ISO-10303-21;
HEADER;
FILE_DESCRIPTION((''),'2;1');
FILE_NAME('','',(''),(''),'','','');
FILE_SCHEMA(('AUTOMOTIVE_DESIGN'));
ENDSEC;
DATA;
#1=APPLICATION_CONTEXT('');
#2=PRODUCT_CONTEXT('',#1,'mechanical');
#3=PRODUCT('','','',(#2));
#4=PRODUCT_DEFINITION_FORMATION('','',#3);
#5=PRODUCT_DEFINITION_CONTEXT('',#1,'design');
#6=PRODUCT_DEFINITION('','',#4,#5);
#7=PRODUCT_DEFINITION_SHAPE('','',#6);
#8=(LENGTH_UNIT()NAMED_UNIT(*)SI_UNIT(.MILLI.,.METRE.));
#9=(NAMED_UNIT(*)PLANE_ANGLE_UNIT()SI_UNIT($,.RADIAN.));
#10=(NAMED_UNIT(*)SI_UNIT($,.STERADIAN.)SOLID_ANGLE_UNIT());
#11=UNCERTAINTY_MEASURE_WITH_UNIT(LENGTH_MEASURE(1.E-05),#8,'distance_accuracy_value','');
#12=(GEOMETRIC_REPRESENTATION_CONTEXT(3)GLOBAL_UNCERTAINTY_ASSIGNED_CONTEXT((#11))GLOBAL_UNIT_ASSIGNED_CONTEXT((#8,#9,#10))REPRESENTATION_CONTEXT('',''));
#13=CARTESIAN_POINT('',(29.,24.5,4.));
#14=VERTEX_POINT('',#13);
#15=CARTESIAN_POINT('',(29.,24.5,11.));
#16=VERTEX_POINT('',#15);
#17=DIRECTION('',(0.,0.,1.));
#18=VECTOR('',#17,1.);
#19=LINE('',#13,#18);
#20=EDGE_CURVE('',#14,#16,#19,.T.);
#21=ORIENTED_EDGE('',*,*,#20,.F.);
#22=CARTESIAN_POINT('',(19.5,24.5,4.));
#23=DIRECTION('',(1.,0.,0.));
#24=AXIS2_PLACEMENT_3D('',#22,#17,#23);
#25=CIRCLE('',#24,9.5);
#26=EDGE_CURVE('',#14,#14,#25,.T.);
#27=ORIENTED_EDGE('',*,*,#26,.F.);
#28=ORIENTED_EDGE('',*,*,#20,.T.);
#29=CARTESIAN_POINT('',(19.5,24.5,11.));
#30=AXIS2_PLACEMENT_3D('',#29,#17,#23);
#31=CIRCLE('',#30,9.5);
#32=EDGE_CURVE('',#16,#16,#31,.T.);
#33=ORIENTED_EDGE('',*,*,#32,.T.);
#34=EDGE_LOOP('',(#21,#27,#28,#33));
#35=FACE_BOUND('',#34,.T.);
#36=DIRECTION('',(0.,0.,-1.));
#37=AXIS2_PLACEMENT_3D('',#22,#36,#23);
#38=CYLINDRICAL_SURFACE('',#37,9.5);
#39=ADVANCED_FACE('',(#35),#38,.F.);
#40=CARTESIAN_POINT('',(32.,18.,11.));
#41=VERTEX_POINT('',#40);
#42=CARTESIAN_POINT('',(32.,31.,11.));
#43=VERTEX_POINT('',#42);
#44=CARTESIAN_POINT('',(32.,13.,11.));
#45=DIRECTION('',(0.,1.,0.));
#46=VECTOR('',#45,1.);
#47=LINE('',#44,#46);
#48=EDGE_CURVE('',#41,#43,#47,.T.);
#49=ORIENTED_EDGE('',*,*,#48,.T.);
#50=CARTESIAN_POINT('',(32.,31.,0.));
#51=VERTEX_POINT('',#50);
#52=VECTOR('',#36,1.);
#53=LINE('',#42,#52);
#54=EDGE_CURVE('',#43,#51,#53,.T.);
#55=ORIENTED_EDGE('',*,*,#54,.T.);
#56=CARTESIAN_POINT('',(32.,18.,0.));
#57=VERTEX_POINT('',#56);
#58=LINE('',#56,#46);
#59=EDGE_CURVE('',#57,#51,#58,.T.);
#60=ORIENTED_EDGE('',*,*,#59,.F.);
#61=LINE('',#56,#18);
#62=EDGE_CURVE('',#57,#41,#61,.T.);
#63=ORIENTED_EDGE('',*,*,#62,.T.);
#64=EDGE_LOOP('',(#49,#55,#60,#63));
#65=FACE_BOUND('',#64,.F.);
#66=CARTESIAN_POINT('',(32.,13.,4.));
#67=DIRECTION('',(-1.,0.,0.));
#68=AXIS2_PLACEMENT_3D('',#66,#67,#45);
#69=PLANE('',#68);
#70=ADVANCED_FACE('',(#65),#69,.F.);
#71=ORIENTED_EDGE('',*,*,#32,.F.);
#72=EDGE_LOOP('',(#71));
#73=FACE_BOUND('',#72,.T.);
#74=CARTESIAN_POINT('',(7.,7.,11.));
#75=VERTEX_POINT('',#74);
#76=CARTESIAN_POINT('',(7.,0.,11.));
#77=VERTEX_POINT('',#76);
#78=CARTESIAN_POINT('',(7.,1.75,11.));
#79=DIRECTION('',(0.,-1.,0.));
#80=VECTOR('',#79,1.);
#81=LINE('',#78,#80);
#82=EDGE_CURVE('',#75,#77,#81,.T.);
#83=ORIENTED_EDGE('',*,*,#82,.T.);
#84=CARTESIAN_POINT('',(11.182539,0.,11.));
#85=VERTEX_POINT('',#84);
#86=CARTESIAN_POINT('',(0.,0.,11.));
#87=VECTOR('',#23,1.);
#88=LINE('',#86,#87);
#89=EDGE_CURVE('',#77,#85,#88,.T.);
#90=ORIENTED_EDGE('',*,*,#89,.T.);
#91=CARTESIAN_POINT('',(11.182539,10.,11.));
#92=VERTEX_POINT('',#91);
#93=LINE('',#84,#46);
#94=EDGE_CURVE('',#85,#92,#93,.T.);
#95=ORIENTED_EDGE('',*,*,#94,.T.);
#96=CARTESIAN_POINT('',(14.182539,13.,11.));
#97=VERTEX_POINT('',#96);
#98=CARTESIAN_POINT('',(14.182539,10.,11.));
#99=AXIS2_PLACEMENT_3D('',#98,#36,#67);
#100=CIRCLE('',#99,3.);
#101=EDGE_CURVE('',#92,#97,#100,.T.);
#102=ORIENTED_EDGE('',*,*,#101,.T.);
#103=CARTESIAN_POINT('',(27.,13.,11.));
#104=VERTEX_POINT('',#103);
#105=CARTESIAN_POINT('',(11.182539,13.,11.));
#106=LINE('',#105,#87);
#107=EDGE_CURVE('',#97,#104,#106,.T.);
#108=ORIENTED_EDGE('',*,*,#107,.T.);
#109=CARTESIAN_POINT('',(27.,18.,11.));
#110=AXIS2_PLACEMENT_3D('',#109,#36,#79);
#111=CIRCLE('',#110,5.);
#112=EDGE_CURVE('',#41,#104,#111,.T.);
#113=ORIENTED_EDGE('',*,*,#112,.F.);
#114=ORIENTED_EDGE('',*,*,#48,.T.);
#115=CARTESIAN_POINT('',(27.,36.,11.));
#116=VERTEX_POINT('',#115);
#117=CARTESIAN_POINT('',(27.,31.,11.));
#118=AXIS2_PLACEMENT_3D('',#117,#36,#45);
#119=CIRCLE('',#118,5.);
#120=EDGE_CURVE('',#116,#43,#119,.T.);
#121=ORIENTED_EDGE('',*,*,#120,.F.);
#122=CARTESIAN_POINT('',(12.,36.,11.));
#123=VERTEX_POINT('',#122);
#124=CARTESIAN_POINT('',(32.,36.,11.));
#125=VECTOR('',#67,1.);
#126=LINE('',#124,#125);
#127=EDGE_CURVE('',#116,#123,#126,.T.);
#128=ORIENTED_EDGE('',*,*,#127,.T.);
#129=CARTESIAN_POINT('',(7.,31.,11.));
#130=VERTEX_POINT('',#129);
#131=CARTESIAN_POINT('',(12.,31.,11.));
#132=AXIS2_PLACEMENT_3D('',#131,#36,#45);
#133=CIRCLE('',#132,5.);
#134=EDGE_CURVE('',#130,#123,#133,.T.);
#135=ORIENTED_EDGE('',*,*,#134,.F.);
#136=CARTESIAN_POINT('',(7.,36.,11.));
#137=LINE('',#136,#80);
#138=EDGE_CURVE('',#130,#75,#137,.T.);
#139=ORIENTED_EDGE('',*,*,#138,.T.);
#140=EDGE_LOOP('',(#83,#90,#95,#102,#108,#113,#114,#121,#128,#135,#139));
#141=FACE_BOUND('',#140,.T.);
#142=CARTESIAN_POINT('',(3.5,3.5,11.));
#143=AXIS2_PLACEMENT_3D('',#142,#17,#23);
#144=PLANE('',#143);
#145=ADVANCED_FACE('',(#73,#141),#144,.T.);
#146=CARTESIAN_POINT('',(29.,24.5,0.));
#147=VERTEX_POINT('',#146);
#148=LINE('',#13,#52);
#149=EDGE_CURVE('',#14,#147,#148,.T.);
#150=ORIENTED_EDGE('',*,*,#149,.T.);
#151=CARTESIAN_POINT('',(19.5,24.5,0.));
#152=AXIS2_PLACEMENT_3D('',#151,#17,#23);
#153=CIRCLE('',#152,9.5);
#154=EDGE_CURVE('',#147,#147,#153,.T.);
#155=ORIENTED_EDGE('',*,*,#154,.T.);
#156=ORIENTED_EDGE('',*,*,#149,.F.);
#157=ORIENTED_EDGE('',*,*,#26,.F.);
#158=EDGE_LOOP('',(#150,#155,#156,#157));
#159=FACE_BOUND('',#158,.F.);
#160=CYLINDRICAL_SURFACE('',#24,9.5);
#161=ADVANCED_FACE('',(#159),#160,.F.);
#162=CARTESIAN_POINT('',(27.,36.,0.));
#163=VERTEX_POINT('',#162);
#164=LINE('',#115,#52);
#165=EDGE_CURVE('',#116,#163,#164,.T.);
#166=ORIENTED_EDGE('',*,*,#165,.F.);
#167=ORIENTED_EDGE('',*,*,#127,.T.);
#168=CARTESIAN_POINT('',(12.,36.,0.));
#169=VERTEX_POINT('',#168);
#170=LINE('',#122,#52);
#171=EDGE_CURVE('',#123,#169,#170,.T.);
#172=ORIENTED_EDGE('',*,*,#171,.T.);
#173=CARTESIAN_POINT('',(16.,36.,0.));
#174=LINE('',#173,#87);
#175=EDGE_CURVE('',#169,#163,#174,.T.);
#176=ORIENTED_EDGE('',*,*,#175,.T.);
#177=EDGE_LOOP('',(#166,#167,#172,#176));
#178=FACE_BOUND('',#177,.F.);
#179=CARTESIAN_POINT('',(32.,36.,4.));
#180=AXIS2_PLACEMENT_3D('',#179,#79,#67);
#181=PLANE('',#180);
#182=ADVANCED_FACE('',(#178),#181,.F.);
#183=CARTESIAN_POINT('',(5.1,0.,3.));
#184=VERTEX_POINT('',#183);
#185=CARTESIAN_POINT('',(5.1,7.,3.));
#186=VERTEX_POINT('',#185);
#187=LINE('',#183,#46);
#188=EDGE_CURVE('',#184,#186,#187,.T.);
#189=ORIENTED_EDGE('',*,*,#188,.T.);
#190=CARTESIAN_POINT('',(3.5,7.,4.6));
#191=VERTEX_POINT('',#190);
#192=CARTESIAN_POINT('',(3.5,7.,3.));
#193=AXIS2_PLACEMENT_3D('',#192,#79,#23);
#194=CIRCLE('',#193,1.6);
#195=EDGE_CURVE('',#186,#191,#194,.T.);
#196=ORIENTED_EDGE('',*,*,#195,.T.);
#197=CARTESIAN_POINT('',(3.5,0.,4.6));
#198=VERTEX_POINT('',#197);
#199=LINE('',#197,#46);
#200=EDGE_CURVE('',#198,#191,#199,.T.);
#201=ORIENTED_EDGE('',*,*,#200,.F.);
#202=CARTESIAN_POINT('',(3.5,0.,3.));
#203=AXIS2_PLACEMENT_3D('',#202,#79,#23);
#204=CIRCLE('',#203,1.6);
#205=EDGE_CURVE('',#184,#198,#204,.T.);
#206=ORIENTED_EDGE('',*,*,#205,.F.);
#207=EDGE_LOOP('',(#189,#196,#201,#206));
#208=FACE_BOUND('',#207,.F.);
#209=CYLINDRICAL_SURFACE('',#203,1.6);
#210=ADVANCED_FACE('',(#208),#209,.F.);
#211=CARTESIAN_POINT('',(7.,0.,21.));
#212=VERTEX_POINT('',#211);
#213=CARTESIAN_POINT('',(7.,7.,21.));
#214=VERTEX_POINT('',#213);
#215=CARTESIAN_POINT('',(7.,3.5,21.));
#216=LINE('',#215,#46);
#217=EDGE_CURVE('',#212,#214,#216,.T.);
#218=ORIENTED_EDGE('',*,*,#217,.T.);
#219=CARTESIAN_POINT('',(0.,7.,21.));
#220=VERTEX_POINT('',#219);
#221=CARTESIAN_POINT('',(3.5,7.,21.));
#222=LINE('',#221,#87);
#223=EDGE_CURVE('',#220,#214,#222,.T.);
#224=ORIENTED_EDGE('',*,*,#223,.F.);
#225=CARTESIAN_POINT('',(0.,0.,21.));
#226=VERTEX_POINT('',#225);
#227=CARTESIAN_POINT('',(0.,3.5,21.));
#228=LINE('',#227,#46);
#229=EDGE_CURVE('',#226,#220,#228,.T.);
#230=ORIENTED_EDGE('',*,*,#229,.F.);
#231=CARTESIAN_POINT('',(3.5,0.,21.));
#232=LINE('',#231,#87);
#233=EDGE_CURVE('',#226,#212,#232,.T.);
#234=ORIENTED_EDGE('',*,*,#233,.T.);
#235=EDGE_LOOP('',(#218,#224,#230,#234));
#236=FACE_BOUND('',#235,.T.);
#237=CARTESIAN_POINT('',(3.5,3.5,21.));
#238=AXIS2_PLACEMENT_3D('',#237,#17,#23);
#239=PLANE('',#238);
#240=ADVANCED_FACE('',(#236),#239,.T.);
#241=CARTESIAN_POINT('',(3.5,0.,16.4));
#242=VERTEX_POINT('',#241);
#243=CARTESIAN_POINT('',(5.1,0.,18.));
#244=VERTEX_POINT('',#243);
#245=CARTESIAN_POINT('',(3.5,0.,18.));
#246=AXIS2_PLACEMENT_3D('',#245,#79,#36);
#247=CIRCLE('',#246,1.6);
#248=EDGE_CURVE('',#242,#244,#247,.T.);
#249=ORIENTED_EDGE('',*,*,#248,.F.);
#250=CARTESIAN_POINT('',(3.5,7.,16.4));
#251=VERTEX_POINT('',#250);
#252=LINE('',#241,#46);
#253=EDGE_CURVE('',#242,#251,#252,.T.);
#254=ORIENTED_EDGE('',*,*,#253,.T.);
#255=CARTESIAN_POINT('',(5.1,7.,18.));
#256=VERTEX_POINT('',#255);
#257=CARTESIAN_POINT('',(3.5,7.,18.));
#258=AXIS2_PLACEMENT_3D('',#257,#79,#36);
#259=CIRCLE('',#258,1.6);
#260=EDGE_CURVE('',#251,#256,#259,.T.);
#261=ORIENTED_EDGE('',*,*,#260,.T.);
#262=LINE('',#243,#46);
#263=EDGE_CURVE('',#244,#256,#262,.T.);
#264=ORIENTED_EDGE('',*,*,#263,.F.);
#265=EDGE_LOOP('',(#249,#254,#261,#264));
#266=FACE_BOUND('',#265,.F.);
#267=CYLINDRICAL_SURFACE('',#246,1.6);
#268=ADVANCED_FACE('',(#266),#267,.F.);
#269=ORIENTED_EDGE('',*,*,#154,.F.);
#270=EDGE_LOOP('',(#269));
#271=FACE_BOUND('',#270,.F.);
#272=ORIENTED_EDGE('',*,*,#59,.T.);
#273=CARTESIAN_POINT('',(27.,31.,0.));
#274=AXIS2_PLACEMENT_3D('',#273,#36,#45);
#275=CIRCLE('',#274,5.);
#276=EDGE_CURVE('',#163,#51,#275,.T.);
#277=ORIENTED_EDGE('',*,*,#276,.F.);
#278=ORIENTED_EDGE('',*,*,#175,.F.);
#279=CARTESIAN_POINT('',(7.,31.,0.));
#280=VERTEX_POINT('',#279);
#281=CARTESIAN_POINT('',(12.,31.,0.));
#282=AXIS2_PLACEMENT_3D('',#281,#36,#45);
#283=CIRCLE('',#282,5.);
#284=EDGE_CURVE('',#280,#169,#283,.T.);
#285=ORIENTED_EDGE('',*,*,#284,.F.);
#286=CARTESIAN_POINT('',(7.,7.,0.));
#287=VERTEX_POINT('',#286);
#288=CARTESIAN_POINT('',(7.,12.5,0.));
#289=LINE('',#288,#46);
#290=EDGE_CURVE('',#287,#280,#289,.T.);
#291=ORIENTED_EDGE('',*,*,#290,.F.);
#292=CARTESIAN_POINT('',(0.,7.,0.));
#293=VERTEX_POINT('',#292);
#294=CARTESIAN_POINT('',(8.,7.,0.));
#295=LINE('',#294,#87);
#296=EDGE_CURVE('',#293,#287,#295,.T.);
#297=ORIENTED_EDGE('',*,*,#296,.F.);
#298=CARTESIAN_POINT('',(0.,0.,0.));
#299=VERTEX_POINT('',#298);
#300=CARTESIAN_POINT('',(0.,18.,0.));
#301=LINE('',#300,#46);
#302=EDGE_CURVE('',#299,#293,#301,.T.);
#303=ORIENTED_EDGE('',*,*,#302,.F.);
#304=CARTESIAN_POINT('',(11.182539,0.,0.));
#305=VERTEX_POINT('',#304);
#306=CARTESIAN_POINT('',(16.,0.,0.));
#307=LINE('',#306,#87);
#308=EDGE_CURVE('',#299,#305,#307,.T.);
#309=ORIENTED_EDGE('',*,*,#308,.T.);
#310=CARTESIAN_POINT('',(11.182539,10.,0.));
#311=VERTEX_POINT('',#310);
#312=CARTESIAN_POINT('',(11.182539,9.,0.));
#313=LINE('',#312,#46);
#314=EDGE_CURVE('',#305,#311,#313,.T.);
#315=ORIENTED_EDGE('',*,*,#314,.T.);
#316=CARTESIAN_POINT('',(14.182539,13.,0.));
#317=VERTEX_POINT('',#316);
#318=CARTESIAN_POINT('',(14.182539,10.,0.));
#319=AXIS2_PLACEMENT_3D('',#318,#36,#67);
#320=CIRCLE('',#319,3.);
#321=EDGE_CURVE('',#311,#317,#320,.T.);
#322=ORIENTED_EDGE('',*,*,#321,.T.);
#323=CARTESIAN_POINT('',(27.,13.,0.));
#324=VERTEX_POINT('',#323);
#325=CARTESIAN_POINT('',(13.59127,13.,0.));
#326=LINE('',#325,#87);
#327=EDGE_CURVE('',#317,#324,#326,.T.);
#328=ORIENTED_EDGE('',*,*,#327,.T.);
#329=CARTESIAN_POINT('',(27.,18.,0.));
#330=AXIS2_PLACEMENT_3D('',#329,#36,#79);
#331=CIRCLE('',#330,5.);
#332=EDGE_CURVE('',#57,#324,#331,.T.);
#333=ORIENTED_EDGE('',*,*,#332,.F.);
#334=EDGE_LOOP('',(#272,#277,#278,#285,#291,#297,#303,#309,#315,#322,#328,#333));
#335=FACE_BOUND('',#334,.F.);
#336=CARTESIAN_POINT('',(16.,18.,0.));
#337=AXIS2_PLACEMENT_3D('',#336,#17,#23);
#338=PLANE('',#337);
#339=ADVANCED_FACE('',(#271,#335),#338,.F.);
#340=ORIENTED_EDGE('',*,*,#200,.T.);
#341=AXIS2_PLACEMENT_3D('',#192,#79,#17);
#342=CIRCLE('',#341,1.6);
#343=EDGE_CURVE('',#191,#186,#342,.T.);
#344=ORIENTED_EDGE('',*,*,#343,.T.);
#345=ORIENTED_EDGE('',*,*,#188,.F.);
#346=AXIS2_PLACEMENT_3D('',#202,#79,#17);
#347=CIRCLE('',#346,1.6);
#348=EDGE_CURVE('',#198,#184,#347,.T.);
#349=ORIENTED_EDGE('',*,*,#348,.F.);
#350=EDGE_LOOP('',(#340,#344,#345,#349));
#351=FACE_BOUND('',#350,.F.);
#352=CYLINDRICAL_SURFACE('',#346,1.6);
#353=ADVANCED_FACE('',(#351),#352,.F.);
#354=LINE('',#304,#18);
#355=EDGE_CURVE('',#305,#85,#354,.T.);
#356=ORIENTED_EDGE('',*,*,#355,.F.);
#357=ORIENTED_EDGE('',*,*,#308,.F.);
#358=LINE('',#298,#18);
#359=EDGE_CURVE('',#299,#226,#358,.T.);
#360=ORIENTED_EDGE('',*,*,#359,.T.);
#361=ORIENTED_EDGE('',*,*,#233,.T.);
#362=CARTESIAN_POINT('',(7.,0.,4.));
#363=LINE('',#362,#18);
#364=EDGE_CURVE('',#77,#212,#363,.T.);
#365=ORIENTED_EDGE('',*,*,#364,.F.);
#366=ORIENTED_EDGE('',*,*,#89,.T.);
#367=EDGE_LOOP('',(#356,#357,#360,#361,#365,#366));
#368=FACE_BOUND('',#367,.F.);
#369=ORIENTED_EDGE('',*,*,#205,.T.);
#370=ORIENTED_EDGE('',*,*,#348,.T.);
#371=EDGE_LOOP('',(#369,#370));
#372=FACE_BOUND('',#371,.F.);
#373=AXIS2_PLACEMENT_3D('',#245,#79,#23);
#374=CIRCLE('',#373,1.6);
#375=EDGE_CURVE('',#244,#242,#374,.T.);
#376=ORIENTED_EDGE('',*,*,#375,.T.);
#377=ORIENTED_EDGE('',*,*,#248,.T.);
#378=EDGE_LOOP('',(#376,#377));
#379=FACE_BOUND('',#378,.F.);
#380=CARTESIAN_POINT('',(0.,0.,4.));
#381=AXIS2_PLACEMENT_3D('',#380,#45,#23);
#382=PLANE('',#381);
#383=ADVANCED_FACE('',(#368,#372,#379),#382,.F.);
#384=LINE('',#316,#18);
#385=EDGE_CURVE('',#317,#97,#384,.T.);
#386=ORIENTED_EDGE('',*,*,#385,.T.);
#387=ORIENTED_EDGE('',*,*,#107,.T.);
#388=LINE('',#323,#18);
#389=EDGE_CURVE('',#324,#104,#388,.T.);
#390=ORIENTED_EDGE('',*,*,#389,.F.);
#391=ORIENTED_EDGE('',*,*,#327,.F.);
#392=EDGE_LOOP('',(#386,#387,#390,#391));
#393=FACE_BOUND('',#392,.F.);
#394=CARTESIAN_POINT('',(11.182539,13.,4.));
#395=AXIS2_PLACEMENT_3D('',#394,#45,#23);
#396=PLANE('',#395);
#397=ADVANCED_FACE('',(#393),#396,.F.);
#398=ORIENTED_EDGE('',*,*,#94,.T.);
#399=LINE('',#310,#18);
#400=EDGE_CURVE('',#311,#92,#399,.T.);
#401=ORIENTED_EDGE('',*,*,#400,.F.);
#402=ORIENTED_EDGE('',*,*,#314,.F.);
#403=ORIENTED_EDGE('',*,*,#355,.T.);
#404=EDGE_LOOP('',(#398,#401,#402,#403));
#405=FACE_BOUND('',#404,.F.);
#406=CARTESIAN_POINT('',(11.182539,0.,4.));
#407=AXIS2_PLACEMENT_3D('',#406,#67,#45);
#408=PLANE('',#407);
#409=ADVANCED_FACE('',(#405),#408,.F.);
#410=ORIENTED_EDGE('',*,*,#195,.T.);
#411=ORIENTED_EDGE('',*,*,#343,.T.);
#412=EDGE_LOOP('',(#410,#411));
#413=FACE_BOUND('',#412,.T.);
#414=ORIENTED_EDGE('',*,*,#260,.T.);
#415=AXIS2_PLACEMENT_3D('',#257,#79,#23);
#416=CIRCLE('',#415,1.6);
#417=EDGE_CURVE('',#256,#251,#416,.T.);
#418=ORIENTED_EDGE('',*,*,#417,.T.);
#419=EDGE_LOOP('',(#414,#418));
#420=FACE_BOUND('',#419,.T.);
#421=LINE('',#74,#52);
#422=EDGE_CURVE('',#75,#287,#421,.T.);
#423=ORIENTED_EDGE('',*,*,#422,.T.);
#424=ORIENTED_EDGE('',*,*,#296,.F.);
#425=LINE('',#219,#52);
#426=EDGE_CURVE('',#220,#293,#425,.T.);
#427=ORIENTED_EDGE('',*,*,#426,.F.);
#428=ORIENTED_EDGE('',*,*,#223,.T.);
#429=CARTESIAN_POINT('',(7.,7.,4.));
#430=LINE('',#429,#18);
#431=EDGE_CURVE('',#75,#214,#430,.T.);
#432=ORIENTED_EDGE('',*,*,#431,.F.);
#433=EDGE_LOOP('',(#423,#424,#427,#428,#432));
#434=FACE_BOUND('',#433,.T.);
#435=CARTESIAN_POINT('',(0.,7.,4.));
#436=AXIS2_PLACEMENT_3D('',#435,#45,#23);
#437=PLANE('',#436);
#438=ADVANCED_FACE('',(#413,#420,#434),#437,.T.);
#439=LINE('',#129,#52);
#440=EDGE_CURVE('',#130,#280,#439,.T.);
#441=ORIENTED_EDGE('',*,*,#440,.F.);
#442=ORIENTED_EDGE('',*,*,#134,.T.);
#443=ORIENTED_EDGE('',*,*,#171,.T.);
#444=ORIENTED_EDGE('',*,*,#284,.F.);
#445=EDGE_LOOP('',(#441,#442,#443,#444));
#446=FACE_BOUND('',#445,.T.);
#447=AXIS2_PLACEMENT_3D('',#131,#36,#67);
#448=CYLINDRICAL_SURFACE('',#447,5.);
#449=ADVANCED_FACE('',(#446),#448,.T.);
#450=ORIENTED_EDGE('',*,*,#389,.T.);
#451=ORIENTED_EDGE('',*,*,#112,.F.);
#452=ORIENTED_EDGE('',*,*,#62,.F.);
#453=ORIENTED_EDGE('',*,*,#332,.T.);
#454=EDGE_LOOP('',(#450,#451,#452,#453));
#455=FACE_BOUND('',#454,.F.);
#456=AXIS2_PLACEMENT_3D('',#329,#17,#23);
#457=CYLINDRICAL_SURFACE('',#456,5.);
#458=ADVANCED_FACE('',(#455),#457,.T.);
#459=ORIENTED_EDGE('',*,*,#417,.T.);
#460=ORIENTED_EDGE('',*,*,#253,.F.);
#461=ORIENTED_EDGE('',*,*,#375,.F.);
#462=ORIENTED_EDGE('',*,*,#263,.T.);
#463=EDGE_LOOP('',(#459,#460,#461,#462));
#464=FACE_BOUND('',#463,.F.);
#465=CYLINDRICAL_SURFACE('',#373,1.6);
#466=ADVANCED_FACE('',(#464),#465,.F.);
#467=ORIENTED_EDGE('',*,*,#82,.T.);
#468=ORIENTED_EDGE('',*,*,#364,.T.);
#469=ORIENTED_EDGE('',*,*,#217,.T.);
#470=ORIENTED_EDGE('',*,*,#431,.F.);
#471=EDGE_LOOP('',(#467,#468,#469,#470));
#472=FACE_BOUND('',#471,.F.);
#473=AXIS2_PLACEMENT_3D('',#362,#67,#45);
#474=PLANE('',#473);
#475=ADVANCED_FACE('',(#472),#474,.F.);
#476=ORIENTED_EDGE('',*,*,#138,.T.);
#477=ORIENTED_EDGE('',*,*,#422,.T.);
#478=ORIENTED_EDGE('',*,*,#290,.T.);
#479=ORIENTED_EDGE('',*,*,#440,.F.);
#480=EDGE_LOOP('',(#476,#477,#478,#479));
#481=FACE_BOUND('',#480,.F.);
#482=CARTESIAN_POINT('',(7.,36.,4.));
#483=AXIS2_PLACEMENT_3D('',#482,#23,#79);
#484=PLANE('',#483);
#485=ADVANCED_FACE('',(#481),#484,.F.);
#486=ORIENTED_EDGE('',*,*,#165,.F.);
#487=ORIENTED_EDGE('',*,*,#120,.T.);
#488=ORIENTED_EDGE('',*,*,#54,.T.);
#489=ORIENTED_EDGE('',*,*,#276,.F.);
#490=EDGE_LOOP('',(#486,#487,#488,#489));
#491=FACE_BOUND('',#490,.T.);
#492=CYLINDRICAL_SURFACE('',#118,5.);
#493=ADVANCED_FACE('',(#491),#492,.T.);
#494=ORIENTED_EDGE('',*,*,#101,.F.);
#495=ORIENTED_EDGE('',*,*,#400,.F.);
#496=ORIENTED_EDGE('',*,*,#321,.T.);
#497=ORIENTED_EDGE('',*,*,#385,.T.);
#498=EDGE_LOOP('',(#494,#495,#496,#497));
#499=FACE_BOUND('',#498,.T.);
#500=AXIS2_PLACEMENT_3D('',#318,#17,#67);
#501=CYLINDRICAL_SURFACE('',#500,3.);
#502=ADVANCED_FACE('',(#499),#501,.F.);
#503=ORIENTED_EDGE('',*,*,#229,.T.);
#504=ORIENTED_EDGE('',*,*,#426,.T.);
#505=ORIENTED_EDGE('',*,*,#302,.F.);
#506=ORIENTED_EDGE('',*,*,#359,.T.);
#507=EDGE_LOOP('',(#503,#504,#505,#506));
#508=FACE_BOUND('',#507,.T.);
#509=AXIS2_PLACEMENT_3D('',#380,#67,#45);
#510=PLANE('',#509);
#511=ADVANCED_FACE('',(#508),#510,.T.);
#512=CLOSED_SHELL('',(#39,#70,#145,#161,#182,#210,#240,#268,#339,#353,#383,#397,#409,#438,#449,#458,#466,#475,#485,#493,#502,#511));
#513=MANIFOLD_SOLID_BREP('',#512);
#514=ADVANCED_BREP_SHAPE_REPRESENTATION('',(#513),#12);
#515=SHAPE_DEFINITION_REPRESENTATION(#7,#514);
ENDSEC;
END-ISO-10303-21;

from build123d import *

# Parameters (mm, degrees)
F0_W     = 32
F0_H     = 36
F1_DEPTH = 4
F2_R     = 9.5
F2_W     = 7
F2_H     = 29
F2_W_2   = 20.817460835
F2_H_2   = 13
F3_DEPTH = 25
F4_W     = 7
F4_H     = 7
F4_R     = 9.5
F5_DEPTH = 7
F6_DEPTH = 17
F8_DEPTH = 25
F9_R     = 5
F10_R    = 3


# Not quite as in the source:
# - a feature of the source that left no trace in its solid (it failed there, or was rolled back) is left out


with BuildPart() as f1:
    # F0 (on Top) → F1 (new body)
    with BuildSketch(Plane.XY):
        with Locations((16, 18)):
            Rectangle(F0_W, F0_H)
    extrude(amount=F1_DEPTH)

    # F2 (on face) → F3 (cut)
    with BuildSketch(Plane.XY.offset(4)):
        with Locations((19.5, 24.5)):
            Circle(F2_R)
        with Locations((3.5, 21.5)):
            Rectangle(F2_W, F2_H)
        with Locations((21.5912695825, 6.5)):
            Rectangle(F2_W_2, F2_H_2)
    extrude(amount=-F3_DEPTH, mode=Mode.SUBTRACT)

    # F4 (on face) → F5 (join)
    with BuildSketch(Plane.XY.offset(4)):
        with Locations((3.5, 3.5)):
            Rectangle(F4_W, F4_H)
        Polygon((7, 36), (7, 7), (7, 0), (11.182539165, 0), (11.182539165, 13), (32, 13), (32, 36), align=None)
        with Locations((19.5, 24.5)):
            Circle(F4_R, mode=Mode.SUBTRACT)
    extrude(amount=F5_DEPTH)

    # F4 (on face) → F6 (join)
    with BuildSketch(Plane.XY.offset(4)):
        with Locations((3.5, 3.5)):
            Rectangle(F4_W, F4_H)
    extrude(amount=F6_DEPTH)

    # F7 (on face) → F8 (cut)
    with BuildSketch(Plane.XZ):
        with BuildLine():
            ThreePointArc((5.1, 3), (4.6313708499, 4.1313708499), (3.5, 4.6))
            ThreePointArc((3.5, 4.6), (2.3686291501, 1.8686291501), (5.1, 3))
        make_face()
        with BuildLine():
            ThreePointArc((5.1, 18), (2.3686291501, 19.1313708499), (3.5, 16.4))
            ThreePointArc((3.5, 16.4), (4.6313708499, 16.8686291501), (5.1, 18))
        make_face()
    extrude(amount=-F8_DEPTH, mode=Mode.SUBTRACT)

    # F9
    f9_edges = [f1.edges().sort_by_distance(p)[0] for p in [
        (32, 36, 5.5),
        (7, 36, 5.5),
        (32, 13, 5.5),
    ]]
    fillet(f9_edges, radius=F9_R)

    # F10
    f10_edges = [f1.edges().sort_by_distance(p)[0] for p in [
        (11.182539, 13, 5.5),
    ]]
    fillet(f10_edges, radius=F10_R)


solid = f1.part
